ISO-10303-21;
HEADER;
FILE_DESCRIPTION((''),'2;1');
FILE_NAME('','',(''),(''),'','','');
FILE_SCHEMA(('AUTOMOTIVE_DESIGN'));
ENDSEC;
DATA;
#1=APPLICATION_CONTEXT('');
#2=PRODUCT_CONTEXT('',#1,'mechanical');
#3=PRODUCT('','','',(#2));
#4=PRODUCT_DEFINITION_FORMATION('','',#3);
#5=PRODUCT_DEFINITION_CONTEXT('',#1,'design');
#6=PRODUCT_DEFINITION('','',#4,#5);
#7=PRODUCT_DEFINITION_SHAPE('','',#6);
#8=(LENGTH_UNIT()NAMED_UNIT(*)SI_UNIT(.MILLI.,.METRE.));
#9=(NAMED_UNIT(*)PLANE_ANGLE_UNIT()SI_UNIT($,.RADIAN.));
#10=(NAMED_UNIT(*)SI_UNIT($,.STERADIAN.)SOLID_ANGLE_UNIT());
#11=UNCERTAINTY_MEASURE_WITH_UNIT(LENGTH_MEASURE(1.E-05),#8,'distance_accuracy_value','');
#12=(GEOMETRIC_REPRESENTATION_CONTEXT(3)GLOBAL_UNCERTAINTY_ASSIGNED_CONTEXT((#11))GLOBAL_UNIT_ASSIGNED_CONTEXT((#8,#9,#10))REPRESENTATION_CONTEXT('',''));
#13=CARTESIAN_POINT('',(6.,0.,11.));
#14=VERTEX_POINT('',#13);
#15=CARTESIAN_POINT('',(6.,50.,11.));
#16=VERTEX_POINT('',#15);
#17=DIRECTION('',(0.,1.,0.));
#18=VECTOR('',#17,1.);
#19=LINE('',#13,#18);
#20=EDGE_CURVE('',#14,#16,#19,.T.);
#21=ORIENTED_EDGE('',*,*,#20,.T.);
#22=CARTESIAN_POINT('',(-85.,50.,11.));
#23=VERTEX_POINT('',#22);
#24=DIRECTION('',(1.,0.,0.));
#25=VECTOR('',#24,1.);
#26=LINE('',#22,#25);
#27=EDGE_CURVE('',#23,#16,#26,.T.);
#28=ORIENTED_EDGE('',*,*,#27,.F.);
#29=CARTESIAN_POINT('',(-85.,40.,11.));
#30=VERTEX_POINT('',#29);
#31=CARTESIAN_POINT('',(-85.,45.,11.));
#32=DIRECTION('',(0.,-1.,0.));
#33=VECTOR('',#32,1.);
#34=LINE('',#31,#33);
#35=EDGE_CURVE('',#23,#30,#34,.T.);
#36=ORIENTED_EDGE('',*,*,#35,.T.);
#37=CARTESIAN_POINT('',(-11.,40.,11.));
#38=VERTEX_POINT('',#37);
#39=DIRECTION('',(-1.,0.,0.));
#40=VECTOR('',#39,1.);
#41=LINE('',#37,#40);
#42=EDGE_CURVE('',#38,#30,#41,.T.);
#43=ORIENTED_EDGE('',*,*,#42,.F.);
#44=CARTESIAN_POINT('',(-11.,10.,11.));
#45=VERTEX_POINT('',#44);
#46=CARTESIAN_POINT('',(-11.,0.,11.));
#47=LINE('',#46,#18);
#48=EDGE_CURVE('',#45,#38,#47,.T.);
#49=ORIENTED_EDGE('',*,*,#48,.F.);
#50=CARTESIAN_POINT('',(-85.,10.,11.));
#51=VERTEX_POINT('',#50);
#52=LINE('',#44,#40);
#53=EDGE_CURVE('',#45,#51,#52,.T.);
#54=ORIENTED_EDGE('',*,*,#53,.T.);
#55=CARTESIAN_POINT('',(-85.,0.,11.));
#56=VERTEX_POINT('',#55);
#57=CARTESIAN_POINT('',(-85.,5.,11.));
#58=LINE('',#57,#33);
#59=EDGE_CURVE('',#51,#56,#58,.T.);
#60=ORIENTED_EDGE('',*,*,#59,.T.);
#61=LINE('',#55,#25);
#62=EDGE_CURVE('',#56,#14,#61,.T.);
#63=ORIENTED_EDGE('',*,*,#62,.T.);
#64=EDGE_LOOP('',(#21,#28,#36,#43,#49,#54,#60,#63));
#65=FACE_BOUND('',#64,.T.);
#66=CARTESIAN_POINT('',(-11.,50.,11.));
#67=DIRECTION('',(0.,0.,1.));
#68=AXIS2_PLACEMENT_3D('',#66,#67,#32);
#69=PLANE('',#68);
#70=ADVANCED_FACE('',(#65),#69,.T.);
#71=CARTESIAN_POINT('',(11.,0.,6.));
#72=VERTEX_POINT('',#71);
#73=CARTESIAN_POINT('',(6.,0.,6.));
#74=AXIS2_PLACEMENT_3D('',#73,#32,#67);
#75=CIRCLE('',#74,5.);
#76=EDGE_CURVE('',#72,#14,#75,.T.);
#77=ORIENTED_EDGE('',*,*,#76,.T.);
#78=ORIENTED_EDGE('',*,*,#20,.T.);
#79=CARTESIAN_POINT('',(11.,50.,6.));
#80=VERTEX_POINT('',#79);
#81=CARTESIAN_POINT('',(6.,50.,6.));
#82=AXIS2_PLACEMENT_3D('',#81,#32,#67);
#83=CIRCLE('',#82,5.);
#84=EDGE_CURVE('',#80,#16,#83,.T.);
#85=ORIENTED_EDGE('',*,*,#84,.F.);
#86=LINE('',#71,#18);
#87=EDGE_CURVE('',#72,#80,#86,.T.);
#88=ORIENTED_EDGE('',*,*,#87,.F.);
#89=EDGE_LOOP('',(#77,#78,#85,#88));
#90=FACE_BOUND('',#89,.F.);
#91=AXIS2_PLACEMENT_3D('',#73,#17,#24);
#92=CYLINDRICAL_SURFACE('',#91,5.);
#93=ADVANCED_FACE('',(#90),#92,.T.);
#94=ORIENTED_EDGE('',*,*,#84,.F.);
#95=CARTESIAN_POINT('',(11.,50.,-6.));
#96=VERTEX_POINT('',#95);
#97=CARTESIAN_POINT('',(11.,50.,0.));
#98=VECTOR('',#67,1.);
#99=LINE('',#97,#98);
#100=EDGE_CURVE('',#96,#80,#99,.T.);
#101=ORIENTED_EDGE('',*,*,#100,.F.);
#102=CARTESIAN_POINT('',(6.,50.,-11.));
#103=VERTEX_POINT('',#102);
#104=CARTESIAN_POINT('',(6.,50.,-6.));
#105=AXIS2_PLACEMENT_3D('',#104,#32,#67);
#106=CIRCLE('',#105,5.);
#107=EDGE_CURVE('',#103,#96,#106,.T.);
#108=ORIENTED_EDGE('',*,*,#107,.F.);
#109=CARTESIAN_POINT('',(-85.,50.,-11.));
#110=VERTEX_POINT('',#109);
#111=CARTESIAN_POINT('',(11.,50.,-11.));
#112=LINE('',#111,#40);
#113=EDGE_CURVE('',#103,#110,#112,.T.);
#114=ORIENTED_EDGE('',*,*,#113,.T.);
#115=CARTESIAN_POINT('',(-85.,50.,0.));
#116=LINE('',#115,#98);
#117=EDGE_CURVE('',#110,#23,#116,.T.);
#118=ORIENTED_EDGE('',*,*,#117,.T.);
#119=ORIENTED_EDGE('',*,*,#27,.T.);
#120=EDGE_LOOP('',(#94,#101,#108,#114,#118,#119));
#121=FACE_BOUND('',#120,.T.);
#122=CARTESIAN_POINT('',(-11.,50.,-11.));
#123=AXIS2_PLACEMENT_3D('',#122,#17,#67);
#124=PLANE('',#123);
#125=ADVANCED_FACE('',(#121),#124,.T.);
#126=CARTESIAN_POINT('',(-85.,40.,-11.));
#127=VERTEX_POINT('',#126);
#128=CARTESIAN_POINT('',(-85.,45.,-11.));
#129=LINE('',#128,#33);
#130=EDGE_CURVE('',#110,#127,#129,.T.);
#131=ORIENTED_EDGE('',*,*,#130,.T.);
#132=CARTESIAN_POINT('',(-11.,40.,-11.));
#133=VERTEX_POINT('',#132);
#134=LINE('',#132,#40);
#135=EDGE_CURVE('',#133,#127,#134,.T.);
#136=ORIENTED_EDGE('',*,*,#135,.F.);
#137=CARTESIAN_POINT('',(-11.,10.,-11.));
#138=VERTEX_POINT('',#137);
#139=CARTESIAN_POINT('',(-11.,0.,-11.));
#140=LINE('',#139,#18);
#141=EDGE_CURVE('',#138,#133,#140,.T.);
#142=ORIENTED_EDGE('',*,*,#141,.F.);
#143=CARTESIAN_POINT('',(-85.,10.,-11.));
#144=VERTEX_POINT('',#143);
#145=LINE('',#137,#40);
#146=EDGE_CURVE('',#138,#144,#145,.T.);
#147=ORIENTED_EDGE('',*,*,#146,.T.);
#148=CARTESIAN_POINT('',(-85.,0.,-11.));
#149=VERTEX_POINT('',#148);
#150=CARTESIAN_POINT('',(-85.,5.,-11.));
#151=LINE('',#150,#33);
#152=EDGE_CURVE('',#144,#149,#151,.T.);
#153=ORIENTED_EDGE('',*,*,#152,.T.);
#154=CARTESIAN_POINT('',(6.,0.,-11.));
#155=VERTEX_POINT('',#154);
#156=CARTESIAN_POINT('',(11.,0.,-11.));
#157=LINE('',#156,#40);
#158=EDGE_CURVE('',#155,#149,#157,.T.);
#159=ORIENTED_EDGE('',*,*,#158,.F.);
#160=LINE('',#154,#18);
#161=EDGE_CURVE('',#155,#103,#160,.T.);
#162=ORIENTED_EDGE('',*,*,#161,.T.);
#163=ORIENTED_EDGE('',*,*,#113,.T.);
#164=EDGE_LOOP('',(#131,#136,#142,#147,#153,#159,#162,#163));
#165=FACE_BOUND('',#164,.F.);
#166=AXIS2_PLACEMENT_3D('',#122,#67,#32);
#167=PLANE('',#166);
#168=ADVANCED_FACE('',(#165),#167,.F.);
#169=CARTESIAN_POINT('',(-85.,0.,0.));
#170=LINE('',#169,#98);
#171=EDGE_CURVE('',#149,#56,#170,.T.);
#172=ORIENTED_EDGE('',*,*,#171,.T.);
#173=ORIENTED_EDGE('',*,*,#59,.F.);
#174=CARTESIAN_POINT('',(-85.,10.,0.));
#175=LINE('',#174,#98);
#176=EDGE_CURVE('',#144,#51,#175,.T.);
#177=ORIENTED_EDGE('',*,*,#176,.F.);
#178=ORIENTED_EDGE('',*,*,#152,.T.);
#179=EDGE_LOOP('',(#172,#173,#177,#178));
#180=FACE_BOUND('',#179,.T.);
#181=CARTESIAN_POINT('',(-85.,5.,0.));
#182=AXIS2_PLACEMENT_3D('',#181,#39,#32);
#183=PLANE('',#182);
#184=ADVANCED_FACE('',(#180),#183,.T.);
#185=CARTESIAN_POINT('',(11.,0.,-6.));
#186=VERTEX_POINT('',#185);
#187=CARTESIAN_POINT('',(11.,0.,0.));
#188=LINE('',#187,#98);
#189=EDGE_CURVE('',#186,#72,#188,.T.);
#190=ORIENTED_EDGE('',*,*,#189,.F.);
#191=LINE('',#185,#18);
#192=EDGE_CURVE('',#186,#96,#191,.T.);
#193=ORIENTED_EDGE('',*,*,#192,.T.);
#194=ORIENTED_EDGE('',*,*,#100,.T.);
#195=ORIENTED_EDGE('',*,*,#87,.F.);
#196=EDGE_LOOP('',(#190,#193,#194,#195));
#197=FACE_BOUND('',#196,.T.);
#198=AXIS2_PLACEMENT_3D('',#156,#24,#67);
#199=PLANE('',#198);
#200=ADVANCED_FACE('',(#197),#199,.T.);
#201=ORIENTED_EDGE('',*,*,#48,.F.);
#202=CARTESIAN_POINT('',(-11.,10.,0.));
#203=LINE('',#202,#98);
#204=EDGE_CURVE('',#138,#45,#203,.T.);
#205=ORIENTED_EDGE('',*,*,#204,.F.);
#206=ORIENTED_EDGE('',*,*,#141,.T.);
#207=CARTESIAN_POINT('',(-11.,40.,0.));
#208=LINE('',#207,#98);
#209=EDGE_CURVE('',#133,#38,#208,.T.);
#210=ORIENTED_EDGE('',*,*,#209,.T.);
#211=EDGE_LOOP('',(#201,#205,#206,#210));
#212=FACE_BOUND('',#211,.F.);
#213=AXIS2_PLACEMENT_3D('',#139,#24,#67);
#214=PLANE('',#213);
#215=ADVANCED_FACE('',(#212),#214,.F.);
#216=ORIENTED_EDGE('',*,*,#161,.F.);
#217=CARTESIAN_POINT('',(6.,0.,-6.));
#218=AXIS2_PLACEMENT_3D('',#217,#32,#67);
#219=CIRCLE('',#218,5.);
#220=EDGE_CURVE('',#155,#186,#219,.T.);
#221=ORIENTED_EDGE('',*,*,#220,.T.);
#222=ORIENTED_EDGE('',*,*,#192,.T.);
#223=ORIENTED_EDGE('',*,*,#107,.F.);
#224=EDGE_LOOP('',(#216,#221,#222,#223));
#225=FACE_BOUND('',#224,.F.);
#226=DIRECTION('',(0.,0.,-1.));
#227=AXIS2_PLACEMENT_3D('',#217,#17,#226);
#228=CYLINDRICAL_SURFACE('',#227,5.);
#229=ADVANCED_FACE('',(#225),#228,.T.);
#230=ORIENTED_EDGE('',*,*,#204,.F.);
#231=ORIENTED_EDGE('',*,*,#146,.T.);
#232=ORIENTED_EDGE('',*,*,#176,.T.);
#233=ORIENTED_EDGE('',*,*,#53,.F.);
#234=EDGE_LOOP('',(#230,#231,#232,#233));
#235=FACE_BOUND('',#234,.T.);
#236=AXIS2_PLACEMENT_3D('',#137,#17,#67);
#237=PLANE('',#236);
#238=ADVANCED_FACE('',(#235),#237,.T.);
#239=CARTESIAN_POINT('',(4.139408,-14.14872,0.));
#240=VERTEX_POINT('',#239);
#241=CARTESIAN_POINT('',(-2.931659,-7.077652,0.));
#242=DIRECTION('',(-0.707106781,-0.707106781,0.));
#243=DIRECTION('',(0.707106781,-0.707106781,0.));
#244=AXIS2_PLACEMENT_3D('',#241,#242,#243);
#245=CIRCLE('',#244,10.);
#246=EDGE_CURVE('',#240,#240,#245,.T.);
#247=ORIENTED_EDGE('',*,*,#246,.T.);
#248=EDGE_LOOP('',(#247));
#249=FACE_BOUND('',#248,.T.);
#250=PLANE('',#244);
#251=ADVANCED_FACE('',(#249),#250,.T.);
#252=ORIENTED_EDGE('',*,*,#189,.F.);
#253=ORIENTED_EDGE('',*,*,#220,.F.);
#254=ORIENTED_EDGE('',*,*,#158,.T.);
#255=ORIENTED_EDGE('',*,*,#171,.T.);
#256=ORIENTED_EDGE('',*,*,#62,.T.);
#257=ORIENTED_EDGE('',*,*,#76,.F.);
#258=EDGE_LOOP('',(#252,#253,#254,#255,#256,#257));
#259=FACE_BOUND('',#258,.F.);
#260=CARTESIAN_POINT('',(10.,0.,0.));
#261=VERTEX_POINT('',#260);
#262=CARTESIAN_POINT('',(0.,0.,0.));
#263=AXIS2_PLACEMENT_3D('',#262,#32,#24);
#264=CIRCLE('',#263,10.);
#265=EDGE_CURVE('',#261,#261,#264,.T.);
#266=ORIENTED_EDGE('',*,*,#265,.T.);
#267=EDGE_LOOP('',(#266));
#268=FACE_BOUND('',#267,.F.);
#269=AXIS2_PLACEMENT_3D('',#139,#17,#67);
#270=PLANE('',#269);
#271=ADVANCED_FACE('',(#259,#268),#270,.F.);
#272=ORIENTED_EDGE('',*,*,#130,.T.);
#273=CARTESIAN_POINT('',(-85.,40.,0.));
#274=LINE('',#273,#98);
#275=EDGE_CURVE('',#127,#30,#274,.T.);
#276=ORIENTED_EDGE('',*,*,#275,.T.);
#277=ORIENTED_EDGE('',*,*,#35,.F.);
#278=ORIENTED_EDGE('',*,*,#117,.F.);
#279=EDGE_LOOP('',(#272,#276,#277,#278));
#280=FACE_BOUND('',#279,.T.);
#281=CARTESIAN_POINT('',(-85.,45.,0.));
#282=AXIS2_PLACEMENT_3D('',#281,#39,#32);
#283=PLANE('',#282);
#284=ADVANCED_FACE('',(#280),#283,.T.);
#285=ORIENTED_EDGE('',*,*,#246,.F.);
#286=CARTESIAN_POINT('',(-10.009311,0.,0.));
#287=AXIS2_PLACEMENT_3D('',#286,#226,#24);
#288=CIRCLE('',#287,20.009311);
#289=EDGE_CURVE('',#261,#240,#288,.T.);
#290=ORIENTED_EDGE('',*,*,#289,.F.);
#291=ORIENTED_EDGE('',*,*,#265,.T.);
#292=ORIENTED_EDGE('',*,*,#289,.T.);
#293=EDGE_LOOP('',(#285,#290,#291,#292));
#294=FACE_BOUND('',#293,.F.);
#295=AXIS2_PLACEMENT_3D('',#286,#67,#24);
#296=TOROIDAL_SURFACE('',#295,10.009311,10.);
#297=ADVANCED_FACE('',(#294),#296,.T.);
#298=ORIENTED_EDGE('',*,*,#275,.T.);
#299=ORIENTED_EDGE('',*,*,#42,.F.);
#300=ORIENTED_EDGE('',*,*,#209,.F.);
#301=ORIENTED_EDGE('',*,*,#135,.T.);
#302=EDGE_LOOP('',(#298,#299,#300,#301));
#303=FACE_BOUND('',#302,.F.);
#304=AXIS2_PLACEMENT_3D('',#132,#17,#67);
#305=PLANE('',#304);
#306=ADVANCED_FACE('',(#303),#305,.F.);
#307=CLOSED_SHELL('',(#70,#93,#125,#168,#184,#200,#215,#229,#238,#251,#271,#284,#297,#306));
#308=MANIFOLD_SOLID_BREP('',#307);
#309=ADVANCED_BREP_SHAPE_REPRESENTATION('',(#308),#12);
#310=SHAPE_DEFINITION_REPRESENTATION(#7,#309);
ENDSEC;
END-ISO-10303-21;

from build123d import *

# Parameters (mm, degrees)
F0_R     = 10
F2_ANGLE = 45
F3_W     = 22
F3_H     = 22
F3_R     = 10
F4_DEPTH = 50
F5_W     = 10
F5_H     = 22
F6_DEPTH = 74
F7_W     = 10
F7_H     = 22
F8_DEPTH = 74
F9_R     = 5


with BuildPart() as f2:
    # F0 (on Front) → F2 (revolve)
    with BuildSketch(Plane.XZ):
        Circle(F0_R)
    revolve(axis=Axis((-10.0093111396, 0, -0.720274169), (0, 0, -1)), revolution_arc=F2_ANGLE)

    # F3 (on face) → F4 (join)
    with BuildSketch(Plane(origin=(0, 0, 0), x_dir=(-1, 0, 0), z_dir=(0, 1, 0))):
        Rectangle(F3_W, F3_H)
        Circle(F3_R, mode=Mode.SUBTRACT)
        Circle(F3_R)
    extrude(amount=F4_DEPTH)

    # F5 (on face) → F6 (join)
    with BuildSketch(Plane(origin=(-11, 0, 0), x_dir=(0, -1, 0), z_dir=(-1, 0, 0))):
        with Locations((-5, 0)):
            Rectangle(F5_W, F5_H)
    extrude(amount=F6_DEPTH)

    # F7 (on face) → F8 (join)
    with BuildSketch(Plane(origin=(-11, 0, 0), x_dir=(0, -1, 0), z_dir=(-1, 0, 0))):
        with Locations((-45, 0)):
            Rectangle(F7_W, F7_H)
    extrude(amount=F8_DEPTH)

    # F9
    f9_edges = [f2.edges().sort_by_distance(p)[0] for p in [
        (11, 25, -11),
        (11, 25, 11),
    ]]
    fillet(f9_edges, radius=F9_R)


solid = f2.part
